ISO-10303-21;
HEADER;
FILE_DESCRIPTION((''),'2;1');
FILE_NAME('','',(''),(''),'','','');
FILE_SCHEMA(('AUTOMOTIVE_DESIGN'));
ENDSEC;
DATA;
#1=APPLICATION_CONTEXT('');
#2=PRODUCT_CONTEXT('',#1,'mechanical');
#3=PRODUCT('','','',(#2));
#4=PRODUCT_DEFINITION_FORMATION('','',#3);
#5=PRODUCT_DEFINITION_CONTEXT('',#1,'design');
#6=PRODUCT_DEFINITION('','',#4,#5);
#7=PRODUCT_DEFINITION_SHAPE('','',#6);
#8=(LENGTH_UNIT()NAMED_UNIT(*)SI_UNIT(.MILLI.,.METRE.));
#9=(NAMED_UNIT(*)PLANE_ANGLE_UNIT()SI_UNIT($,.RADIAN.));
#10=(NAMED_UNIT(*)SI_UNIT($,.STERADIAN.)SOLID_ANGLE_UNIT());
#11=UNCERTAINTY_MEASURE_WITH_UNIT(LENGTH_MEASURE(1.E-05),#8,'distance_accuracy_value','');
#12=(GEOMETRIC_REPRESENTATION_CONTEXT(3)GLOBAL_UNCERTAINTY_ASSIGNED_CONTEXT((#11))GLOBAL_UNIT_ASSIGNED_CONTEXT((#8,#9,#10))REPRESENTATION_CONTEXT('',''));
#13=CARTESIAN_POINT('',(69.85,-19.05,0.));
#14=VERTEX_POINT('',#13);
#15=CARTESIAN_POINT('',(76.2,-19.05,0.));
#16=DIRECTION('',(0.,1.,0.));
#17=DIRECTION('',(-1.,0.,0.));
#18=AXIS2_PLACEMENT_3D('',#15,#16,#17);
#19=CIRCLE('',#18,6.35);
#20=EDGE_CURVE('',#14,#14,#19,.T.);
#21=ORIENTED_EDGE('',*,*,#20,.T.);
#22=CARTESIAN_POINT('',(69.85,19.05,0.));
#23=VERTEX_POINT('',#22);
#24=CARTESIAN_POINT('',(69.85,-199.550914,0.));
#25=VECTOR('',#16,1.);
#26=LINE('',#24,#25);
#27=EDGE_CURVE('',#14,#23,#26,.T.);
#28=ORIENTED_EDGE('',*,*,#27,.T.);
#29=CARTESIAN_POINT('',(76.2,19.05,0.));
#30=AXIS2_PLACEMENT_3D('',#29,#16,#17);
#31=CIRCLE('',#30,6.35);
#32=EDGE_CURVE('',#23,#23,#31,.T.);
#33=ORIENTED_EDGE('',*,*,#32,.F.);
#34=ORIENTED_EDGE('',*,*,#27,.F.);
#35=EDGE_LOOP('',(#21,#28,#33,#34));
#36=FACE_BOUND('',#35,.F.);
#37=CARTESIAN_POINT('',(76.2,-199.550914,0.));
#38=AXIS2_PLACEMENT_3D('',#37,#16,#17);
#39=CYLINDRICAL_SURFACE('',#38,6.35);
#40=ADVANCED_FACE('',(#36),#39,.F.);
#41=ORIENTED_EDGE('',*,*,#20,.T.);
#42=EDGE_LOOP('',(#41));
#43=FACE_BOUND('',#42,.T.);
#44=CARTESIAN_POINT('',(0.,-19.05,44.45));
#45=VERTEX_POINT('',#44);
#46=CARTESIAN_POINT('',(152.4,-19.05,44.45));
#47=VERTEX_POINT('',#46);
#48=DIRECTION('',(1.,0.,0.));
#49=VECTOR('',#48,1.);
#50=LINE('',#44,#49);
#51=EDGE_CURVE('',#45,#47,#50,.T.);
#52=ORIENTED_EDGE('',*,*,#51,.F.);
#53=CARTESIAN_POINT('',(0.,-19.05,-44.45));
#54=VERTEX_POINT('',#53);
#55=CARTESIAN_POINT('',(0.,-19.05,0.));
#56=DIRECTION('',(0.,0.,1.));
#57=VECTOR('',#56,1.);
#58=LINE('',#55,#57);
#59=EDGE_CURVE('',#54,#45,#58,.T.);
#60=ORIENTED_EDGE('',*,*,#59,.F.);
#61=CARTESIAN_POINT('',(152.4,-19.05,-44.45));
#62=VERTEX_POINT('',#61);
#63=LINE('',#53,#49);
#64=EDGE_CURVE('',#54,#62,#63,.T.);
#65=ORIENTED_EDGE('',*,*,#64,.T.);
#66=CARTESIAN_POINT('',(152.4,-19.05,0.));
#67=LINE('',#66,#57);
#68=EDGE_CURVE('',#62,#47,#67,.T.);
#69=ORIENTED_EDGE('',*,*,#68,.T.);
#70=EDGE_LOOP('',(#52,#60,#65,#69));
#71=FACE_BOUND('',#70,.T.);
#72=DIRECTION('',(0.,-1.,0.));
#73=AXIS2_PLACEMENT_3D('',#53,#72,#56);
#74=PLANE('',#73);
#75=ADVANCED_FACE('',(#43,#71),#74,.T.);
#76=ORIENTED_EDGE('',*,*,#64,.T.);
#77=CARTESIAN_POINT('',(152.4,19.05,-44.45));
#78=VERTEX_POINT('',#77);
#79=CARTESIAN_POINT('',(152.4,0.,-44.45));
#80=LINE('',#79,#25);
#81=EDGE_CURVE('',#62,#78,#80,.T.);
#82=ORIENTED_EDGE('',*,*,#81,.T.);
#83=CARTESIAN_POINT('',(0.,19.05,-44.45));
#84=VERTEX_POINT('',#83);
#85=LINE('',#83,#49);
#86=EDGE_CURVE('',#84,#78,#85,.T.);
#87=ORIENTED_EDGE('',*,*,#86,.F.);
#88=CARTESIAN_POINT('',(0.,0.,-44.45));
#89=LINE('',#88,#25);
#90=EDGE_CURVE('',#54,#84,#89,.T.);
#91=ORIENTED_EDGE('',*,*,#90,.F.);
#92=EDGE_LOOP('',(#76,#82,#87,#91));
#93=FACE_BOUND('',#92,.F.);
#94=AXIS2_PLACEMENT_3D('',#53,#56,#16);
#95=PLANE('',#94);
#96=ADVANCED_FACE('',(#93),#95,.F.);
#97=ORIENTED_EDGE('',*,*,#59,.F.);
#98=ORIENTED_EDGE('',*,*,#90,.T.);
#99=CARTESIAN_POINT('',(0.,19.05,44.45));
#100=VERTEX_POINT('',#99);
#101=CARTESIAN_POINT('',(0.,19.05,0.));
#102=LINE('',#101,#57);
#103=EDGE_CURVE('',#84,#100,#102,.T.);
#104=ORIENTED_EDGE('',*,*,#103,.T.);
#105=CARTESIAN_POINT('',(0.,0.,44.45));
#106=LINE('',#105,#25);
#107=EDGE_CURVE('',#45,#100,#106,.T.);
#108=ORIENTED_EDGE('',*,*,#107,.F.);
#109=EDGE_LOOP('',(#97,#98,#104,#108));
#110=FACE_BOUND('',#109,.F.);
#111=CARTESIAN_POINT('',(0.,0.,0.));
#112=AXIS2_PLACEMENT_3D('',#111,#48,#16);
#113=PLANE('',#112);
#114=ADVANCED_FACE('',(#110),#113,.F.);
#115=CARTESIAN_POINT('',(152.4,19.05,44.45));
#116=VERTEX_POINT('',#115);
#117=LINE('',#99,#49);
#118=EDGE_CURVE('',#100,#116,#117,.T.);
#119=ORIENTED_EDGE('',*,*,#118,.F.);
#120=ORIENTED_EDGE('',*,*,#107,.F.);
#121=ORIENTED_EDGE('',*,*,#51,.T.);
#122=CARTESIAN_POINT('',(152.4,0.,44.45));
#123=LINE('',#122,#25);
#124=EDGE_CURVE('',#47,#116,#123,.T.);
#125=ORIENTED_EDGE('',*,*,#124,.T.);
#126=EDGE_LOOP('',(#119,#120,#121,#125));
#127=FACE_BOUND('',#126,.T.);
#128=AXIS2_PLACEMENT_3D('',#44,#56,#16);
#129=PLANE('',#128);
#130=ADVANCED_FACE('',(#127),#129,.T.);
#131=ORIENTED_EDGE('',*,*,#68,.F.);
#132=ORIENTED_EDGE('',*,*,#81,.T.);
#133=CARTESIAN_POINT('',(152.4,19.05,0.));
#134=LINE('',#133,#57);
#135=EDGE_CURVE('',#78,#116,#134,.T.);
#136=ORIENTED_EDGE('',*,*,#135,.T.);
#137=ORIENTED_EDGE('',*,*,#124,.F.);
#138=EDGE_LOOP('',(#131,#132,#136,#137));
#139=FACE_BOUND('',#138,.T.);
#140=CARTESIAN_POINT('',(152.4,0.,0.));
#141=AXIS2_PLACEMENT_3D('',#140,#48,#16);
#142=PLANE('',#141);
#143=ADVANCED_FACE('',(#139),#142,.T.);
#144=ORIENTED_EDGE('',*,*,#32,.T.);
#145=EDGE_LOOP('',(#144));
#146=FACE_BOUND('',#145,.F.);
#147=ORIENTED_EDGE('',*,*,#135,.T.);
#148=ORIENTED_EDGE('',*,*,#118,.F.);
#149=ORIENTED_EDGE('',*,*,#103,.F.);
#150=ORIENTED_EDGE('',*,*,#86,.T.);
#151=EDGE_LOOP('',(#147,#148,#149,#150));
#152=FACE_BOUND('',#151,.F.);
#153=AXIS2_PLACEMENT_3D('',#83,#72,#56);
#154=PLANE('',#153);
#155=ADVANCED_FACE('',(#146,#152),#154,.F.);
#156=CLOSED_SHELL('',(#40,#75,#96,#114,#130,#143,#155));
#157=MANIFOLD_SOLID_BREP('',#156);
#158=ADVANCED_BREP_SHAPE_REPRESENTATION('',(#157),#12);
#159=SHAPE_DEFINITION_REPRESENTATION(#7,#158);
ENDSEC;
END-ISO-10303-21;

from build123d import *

# Parameters (mm, degrees)
F0_W     = 38.1
F0_H     = 88.9
F1_DEPTH = 152.4
F3_D     = 12.7


# Not quite as in the source:
# - a feature of the source that left no trace in its solid (it failed there, or was rolled back) is left out
# - a length typed as a fraction of an inch, garbled in the dataset ("3 / 203.2 mm" for 3/8 in), is restored


with BuildPart() as f1:
    # F0 (on Right) → F1 (new body)
    with BuildSketch(Plane.YZ):
        Rectangle(F0_W, F0_H)
    extrude(amount=F1_DEPTH)

    # F3 (through all)
    with Locations(Plane.XZ.offset(19.05)):
        with Locations((76.2, 0)):
            Hole(F3_D / 2)


solid = f1.part
